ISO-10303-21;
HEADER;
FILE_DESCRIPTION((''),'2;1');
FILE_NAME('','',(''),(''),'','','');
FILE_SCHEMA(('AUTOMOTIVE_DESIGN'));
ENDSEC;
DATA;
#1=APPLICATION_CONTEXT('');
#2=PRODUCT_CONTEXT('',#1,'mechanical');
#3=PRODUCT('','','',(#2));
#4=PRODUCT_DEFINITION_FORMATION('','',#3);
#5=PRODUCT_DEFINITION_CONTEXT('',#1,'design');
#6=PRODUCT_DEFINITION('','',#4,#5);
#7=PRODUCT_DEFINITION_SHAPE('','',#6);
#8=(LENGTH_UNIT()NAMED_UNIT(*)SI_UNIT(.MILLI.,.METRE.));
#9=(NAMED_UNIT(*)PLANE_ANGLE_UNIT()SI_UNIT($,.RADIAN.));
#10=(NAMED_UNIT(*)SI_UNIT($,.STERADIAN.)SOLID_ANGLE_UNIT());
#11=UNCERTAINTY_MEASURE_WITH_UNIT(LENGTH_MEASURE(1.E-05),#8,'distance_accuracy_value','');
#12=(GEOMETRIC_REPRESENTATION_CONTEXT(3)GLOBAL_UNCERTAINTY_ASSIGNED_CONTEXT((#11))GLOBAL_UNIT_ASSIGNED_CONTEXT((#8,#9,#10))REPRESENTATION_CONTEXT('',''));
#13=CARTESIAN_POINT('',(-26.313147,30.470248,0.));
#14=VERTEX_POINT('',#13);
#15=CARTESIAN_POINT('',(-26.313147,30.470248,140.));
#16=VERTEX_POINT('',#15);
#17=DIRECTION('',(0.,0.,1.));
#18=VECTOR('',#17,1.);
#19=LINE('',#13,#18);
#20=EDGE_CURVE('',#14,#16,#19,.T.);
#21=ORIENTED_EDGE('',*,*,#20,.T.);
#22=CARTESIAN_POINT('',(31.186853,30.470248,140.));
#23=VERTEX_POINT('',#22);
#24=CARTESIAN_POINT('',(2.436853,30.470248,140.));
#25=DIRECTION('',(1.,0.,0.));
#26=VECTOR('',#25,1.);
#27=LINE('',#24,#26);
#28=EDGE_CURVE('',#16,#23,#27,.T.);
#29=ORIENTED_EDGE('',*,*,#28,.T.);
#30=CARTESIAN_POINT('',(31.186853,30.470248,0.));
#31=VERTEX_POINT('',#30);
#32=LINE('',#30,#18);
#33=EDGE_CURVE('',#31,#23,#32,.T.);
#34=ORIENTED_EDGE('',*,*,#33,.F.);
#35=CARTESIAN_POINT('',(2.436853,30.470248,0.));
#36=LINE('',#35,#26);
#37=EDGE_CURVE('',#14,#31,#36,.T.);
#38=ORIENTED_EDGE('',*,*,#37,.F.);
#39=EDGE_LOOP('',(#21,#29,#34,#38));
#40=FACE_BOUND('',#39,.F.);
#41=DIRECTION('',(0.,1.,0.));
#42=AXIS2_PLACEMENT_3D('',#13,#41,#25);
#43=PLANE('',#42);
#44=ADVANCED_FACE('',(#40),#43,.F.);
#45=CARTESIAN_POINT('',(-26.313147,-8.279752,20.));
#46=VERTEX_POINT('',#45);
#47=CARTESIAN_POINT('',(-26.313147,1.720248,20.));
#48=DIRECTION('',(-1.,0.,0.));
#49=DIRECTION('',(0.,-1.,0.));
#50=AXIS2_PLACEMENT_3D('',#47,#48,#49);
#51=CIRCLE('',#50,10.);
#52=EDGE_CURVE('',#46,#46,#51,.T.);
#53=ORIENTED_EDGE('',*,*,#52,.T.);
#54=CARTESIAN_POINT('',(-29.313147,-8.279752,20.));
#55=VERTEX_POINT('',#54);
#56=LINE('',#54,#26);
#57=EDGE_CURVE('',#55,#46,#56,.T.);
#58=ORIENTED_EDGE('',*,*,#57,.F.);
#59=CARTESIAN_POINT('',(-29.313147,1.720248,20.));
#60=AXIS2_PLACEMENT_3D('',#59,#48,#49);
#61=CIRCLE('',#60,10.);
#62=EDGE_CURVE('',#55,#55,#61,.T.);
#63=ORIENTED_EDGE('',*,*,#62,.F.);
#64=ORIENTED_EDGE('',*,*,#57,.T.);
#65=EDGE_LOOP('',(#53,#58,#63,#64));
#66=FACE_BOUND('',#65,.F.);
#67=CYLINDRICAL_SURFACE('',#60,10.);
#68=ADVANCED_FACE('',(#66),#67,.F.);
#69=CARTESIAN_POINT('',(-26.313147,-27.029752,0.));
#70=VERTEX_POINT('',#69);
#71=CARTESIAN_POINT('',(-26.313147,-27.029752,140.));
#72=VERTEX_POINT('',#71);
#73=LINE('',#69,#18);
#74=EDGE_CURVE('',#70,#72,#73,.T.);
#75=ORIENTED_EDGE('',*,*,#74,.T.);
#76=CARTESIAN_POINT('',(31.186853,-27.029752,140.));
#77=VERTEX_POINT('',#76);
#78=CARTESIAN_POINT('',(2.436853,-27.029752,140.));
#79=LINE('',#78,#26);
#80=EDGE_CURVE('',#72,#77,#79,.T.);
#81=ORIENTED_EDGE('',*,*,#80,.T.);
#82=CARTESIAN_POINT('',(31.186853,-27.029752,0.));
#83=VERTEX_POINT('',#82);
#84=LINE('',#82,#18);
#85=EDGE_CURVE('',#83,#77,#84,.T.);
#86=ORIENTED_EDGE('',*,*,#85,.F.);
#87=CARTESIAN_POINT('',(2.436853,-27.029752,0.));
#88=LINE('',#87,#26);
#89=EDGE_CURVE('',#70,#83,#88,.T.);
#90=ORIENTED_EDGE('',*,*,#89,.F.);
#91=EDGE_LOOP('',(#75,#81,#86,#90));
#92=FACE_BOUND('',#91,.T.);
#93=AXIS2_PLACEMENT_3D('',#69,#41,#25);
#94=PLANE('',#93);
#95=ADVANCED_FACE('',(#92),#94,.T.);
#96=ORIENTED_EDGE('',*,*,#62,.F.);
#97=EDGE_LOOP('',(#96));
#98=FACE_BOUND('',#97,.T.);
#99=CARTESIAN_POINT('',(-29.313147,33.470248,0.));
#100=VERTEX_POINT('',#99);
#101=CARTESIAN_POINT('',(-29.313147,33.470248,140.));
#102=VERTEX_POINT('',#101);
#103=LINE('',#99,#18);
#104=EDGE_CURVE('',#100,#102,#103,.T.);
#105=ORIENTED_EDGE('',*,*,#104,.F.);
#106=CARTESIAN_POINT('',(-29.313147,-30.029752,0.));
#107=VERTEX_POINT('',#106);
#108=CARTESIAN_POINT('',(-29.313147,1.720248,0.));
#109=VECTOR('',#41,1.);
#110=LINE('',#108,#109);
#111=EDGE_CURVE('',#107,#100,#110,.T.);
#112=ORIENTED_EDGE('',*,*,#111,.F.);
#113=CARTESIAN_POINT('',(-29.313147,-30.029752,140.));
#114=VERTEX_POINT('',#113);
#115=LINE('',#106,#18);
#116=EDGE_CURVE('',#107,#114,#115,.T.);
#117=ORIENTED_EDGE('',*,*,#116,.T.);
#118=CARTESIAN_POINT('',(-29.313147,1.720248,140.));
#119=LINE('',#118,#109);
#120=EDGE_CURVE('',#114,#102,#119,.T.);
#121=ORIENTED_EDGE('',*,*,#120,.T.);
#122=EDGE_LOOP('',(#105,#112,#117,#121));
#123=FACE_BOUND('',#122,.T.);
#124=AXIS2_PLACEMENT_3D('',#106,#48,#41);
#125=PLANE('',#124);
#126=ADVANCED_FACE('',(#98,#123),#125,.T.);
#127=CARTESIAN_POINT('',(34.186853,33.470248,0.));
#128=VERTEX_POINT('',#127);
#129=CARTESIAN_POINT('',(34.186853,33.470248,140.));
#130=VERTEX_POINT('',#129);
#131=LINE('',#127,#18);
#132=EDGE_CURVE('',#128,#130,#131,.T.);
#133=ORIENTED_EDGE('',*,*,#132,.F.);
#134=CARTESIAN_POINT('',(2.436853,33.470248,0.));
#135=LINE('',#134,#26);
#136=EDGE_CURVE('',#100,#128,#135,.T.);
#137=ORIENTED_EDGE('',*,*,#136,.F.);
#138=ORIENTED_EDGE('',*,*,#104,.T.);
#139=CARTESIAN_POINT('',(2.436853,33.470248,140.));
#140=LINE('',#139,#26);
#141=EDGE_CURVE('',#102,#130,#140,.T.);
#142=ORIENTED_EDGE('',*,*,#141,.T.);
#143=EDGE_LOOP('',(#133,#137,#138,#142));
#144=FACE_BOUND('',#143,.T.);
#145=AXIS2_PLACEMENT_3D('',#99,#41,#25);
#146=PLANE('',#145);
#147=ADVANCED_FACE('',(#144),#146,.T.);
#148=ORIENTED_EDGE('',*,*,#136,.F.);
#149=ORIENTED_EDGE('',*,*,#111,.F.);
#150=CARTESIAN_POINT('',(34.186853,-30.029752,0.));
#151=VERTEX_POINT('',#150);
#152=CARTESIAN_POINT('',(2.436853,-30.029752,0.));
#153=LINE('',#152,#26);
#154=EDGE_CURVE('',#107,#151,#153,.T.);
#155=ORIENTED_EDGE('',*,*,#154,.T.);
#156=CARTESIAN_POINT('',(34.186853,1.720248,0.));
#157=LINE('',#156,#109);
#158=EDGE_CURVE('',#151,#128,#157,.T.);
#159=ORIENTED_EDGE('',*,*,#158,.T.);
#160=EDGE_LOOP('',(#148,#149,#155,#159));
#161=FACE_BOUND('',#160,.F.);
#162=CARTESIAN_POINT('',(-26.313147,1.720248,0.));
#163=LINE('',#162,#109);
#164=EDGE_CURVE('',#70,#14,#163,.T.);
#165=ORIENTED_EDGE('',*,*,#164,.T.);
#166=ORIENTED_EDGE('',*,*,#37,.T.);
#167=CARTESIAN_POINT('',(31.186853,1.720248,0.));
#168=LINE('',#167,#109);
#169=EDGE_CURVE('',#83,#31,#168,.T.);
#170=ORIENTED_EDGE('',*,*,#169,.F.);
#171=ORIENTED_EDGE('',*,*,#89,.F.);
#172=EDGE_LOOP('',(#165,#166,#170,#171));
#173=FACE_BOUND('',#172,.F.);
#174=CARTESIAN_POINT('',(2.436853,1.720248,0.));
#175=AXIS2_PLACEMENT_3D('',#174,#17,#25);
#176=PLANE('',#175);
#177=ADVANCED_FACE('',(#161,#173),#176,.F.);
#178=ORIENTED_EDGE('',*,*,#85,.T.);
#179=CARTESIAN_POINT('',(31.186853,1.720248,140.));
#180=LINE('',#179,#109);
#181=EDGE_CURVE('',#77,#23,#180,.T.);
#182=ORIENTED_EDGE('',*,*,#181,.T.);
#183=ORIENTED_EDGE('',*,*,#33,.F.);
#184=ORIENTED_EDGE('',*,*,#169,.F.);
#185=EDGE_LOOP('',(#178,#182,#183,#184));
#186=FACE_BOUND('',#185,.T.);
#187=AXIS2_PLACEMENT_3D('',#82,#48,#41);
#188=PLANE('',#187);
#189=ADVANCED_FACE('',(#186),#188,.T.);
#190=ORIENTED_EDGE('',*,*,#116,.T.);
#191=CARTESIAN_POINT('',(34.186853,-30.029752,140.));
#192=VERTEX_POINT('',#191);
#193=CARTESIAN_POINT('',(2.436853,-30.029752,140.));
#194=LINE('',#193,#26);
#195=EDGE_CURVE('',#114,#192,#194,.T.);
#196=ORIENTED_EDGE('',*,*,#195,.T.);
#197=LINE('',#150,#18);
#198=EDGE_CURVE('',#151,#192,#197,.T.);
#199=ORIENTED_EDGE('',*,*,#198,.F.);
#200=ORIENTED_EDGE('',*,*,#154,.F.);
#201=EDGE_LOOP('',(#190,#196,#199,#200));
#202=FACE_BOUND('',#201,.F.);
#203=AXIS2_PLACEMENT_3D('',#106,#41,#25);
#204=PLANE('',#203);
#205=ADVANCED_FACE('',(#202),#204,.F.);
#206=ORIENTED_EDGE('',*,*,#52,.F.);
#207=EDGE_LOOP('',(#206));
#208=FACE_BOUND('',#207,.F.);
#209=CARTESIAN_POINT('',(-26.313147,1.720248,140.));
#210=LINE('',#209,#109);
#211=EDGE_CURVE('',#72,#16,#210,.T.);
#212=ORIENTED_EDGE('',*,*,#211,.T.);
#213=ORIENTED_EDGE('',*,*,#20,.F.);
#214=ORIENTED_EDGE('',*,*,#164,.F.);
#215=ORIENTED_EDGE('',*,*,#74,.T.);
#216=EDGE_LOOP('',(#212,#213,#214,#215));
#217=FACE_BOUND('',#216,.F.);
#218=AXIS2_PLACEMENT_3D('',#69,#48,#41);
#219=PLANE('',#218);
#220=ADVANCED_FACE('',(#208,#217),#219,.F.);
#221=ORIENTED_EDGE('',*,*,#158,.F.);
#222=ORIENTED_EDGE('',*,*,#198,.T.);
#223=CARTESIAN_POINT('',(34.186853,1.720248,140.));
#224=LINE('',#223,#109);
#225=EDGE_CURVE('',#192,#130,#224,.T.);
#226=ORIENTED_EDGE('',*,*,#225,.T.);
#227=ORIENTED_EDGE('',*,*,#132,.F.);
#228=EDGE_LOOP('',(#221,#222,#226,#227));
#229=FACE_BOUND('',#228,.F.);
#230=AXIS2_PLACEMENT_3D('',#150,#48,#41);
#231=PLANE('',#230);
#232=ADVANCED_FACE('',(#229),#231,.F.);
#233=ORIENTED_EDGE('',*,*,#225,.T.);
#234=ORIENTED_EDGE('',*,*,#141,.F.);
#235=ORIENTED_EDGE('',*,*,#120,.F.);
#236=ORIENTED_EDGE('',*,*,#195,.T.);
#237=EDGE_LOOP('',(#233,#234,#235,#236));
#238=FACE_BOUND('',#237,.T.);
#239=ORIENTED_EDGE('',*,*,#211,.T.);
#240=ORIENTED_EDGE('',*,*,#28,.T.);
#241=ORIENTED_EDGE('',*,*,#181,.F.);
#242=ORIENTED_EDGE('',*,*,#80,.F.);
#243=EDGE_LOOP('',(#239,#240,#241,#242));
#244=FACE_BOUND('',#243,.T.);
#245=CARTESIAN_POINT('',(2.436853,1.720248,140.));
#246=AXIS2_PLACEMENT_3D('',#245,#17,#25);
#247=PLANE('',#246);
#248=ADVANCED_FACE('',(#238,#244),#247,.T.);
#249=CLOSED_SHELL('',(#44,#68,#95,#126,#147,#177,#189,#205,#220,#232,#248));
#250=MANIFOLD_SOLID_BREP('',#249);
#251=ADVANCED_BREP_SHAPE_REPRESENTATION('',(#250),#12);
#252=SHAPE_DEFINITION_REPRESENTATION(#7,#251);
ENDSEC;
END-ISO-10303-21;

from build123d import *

# Parameters (mm, degrees)
F0_W     = 63.5
F0_H     = 63.5
F0_W_2   = 57.5
F0_H_2   = 57.5
F1_DEPTH = 140
F2_R     = 10
F3_DEPTH = 3


# Not quite as in the source:
# - a feature names something its author has since deleted; it is built from what else it names


with BuildPart() as f1:
    # F0 (on Top) → F1 (new body)
    with BuildSketch(Plane.XY):
        with Locations((2.4368530139, 1.7202482249)):
            Rectangle(F0_W, F0_H)
        with Locations((2.4368530139, 1.7202482249)):
            Rectangle(F0_W_2, F0_H_2, mode=Mode.SUBTRACT)
    extrude(amount=F1_DEPTH)

    # F2 (on face) → F3 (cut)
    with BuildSketch(Plane(origin=(-29.3131469861, 0, 0), x_dir=(0, -1, 0), z_dir=(-1, 0, 0))):
        with Locations((-1.7202482249, 20)):
            Circle(F2_R)
    extrude(amount=-F3_DEPTH, mode=Mode.SUBTRACT)


solid = f1.part
